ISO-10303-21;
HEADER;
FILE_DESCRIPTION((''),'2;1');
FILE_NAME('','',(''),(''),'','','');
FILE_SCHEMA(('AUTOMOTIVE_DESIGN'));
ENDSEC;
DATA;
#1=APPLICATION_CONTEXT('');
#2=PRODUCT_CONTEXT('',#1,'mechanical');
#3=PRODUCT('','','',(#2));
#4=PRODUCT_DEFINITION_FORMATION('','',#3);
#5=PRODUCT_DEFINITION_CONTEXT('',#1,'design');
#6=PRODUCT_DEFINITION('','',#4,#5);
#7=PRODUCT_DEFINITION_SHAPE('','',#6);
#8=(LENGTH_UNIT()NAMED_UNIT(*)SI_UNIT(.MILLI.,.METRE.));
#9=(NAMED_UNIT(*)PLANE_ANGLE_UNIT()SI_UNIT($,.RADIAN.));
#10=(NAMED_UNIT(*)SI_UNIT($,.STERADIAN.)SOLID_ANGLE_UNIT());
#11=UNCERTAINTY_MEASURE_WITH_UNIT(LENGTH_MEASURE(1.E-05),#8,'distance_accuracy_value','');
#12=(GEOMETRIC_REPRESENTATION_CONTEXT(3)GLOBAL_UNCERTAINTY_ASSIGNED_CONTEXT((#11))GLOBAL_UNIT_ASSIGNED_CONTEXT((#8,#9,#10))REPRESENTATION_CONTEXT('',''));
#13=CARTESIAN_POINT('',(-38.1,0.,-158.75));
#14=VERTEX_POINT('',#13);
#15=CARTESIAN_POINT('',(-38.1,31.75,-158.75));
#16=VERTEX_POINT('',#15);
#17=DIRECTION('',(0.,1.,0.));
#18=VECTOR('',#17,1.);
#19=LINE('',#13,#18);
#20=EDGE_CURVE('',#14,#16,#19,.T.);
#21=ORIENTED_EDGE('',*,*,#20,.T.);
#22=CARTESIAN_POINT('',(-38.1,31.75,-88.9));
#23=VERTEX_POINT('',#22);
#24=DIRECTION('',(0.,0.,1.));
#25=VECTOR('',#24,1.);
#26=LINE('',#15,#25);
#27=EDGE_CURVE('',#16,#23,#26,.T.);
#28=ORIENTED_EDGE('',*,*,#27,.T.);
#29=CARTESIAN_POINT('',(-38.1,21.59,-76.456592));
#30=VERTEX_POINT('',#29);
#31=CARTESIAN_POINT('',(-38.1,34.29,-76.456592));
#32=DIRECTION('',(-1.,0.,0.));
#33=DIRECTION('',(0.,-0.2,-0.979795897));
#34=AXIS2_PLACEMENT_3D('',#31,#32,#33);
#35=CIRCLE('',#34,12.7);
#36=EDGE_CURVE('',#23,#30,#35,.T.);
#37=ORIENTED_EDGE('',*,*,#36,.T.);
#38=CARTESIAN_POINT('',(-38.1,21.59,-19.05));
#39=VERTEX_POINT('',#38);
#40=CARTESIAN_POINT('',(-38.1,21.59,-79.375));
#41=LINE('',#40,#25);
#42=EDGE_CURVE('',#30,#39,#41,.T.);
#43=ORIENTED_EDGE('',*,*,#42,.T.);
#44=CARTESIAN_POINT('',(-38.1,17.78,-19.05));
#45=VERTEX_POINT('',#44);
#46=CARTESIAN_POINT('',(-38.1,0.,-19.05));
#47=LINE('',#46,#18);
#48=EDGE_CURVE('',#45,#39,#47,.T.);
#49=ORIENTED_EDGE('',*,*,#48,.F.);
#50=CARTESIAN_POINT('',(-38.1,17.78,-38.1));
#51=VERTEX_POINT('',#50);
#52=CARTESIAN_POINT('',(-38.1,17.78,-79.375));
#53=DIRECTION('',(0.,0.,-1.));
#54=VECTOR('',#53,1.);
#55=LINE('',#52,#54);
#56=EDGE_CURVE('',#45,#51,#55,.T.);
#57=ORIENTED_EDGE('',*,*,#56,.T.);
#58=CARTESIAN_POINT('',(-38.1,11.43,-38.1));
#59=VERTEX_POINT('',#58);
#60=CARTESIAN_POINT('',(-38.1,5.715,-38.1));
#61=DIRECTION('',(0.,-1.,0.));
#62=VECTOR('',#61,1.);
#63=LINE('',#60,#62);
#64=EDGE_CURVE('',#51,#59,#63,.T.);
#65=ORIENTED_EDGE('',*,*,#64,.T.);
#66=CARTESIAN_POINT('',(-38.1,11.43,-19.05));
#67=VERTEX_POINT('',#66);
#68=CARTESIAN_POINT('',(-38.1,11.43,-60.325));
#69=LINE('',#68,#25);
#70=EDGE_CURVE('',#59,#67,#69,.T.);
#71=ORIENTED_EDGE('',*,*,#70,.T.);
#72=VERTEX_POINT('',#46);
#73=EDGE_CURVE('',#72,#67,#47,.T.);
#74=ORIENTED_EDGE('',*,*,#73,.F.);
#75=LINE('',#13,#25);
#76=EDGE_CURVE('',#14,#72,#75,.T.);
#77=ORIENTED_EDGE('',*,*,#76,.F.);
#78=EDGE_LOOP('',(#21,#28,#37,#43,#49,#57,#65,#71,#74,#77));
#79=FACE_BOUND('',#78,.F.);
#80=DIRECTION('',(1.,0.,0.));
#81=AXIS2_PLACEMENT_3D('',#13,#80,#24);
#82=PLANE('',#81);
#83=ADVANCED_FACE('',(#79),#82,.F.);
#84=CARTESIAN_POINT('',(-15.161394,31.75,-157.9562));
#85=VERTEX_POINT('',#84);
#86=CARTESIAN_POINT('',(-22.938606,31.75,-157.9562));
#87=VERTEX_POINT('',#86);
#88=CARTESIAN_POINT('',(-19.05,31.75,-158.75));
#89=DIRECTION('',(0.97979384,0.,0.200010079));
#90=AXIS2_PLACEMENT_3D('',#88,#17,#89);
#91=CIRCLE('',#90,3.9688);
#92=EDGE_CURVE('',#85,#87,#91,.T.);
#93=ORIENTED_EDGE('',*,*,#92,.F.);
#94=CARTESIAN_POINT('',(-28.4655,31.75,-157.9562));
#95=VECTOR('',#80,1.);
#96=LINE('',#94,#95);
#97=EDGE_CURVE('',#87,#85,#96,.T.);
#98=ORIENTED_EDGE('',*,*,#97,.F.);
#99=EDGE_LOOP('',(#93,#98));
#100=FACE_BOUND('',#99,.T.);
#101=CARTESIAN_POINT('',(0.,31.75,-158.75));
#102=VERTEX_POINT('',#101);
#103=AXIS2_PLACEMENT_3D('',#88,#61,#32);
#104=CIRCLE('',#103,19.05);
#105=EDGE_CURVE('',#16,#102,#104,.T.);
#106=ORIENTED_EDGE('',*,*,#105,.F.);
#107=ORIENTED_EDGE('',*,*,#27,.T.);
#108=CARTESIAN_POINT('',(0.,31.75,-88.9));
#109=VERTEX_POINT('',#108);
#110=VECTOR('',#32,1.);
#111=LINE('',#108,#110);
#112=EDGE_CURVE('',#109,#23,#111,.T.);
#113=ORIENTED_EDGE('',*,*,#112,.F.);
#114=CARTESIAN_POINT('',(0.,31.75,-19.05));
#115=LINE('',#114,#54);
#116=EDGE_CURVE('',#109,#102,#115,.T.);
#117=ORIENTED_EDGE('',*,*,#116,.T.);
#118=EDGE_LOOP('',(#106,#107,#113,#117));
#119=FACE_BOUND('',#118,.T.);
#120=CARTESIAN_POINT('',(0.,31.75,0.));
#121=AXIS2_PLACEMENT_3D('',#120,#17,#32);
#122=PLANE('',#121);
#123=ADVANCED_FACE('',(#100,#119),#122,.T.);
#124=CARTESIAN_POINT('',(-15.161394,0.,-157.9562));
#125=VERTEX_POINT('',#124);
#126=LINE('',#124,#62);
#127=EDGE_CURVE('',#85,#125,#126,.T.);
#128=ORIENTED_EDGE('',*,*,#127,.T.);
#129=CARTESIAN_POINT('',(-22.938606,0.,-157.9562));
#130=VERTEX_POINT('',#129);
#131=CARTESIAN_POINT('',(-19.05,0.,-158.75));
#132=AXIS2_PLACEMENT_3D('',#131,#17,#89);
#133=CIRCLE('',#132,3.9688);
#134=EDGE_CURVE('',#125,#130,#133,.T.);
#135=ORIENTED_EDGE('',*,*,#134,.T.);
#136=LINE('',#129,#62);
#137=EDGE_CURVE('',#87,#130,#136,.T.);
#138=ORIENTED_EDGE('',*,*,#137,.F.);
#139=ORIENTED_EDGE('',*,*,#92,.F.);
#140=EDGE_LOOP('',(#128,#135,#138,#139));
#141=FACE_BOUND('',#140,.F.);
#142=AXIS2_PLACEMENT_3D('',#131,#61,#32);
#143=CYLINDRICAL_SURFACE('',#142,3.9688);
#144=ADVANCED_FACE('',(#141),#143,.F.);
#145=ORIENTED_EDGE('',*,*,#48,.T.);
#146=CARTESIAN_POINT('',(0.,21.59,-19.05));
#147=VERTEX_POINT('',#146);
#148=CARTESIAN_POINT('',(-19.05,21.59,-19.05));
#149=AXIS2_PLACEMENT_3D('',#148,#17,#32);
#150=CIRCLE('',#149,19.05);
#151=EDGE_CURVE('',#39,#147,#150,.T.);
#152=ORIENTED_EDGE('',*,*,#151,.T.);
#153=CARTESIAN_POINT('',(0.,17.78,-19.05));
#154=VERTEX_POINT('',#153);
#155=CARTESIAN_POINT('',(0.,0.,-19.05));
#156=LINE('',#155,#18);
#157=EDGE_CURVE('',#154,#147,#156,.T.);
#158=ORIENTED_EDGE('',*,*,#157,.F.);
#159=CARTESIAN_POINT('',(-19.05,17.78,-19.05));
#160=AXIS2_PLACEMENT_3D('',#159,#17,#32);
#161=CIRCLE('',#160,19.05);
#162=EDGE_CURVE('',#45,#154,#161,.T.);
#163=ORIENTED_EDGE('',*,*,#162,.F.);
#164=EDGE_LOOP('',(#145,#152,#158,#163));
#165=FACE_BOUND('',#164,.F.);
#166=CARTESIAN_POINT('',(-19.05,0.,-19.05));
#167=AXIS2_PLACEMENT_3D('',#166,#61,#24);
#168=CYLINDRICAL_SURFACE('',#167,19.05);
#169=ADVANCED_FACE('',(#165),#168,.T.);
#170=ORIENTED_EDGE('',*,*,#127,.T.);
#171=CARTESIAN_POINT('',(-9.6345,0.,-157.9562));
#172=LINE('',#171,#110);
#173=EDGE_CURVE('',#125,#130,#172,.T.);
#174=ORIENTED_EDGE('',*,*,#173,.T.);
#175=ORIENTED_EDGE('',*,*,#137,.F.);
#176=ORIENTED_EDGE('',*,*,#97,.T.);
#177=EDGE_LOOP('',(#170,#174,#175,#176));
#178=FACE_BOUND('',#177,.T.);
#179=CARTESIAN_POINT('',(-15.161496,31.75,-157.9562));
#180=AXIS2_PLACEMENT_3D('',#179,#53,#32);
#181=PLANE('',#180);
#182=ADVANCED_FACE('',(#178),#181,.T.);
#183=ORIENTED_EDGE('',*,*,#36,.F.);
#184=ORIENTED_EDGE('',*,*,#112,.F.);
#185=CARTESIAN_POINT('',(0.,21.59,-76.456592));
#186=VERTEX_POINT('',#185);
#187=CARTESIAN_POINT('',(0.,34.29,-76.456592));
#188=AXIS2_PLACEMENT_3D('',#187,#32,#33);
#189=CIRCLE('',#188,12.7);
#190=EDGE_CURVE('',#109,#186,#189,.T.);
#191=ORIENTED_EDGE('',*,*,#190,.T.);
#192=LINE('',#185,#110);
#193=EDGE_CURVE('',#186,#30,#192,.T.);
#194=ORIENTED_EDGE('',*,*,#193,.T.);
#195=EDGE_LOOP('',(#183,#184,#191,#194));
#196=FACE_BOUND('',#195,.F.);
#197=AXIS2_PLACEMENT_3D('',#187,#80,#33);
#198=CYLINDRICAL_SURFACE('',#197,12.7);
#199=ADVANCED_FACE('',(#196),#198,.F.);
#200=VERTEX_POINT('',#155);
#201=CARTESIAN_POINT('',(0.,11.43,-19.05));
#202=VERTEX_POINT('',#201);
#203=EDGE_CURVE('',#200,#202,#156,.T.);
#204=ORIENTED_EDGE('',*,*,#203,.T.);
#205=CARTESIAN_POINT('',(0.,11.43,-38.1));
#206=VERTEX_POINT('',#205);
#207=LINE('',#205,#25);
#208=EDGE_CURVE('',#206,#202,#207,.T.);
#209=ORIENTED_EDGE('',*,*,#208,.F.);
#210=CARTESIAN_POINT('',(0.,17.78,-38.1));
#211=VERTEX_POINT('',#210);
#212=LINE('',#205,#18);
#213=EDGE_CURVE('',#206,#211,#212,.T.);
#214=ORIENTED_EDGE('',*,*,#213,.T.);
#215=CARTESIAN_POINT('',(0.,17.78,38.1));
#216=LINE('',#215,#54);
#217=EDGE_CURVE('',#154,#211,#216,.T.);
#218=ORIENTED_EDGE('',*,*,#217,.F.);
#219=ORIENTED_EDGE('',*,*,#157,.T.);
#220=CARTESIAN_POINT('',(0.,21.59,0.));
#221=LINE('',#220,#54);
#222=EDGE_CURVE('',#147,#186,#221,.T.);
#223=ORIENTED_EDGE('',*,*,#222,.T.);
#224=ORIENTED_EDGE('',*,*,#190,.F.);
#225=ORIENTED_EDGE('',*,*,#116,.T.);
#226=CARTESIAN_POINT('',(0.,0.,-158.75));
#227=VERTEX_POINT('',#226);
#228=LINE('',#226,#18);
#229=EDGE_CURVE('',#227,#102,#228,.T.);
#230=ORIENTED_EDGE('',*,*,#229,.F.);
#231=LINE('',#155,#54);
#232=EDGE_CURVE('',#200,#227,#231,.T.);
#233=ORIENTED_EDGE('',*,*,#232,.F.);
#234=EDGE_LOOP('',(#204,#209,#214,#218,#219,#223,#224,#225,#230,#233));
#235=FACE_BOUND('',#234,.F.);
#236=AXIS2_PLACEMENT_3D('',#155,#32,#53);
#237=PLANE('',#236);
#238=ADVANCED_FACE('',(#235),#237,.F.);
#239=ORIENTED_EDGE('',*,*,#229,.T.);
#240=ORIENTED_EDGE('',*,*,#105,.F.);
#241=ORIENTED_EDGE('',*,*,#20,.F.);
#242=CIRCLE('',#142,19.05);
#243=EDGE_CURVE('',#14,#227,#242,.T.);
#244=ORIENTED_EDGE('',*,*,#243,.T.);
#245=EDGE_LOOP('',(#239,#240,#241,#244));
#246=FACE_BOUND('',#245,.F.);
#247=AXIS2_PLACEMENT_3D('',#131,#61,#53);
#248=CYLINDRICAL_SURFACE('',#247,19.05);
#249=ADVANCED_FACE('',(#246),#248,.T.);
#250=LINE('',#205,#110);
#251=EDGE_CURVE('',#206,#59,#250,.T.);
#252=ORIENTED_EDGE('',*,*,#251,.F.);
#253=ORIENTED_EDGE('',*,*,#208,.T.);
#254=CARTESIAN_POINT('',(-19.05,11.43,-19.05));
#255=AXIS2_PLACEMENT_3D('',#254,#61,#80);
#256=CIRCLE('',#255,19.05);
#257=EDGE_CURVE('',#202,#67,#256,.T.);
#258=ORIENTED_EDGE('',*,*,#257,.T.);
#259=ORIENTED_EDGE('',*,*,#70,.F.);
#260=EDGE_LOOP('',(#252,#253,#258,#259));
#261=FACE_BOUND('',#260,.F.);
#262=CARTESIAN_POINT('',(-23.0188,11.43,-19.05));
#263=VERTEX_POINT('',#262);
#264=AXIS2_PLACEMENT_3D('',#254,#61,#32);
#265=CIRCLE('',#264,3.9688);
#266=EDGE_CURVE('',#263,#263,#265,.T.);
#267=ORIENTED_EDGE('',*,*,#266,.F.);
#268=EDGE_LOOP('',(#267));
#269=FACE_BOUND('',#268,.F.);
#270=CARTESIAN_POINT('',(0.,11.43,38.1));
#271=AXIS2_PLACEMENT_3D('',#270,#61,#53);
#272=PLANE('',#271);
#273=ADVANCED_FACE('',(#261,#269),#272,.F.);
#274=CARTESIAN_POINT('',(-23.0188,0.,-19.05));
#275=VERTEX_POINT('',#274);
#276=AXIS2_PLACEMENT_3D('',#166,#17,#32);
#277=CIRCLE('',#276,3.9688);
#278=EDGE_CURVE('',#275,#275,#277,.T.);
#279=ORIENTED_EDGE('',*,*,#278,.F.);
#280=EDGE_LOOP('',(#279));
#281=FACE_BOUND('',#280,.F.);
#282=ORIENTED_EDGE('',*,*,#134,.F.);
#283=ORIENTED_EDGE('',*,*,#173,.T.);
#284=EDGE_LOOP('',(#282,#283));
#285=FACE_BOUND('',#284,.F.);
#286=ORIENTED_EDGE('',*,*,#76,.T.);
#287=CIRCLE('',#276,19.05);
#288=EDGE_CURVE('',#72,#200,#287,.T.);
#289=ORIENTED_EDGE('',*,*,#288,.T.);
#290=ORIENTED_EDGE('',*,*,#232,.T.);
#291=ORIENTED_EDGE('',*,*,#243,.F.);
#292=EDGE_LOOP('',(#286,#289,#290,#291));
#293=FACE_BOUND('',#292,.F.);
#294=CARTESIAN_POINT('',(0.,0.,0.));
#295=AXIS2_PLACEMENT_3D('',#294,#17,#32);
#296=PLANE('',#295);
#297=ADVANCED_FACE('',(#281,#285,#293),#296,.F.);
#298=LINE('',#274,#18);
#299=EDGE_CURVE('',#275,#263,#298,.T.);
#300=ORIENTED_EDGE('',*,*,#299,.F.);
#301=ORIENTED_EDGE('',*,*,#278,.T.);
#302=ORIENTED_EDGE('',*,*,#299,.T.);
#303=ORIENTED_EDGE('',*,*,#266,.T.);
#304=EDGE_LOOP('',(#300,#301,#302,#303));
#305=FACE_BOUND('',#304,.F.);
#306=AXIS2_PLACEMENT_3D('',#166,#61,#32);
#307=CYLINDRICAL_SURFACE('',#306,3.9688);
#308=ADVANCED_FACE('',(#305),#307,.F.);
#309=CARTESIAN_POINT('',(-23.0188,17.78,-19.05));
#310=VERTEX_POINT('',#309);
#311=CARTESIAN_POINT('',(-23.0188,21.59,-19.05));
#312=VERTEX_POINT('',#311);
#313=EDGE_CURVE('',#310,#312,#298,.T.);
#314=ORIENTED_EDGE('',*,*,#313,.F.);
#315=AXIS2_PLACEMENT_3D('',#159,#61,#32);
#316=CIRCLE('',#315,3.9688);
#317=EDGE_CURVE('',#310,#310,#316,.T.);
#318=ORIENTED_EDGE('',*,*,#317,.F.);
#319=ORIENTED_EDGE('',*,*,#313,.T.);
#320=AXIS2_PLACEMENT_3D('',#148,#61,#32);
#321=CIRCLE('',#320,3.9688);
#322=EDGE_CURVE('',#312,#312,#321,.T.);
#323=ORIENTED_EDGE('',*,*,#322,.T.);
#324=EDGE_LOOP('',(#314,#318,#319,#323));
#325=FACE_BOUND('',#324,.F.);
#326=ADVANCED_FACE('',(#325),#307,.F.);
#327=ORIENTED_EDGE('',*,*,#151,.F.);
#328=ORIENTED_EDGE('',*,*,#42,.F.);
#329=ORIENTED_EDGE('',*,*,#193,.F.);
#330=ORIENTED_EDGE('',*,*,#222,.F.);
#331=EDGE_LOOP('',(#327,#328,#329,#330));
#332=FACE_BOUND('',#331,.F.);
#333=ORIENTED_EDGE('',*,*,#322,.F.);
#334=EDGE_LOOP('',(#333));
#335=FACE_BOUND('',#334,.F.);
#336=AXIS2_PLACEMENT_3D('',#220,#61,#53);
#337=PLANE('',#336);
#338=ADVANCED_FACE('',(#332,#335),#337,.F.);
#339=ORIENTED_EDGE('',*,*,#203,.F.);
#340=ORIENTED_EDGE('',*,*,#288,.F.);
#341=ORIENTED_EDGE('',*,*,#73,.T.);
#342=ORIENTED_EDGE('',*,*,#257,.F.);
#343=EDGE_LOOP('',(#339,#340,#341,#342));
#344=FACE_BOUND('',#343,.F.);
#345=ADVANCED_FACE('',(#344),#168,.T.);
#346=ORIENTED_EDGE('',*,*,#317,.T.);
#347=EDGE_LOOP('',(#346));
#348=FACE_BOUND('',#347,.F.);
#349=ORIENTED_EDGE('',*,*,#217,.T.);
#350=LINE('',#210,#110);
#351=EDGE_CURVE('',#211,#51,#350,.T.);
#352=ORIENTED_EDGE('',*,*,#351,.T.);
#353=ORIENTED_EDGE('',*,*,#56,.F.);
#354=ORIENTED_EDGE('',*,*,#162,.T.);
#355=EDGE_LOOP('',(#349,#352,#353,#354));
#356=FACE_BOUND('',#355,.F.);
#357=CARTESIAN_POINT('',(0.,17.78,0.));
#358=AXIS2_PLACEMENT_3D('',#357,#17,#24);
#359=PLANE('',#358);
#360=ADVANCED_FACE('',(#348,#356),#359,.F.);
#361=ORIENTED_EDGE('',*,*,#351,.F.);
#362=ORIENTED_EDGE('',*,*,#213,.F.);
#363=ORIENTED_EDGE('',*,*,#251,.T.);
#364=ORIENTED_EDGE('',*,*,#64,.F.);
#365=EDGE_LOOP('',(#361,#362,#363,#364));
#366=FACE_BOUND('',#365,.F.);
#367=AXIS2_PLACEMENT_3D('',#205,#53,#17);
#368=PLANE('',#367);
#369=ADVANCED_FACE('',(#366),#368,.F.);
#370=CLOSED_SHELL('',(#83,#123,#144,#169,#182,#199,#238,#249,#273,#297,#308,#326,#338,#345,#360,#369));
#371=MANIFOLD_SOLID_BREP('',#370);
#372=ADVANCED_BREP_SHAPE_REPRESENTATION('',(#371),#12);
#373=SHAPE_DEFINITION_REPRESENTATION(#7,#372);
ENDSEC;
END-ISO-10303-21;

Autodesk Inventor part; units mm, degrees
ref_plane "YZ Plane" through (0, 0, 0) normal (1, 0, 0) x (0, 1, 0)
ref_plane "XZ Plane" through (0, 0, 0) normal (0, 1, 0) x (-1, 0, 0)
ref_plane "XY Plane" through (0, 0, 0) normal (0, 0, 1) x (1, 0, 0)
sketch "Sketch1" plane through (0, 0, 0) normal (0, 1, 0) x (-1, 0, 0)
  line L0 (0, -19.05) -> (0, -158.75)
  line L1 (19.05, -177.8) -> (19.05, -177.8)
  line L2 (38.1, -158.75) -> (38.1, -19.05)
  line L3 (19.05, 0) -> (19.05, 0)
  arc A0 (0, -158.75) -> (19.05, -177.8) centre (19.05, -158.75) ccw
  arc A1 (19.05, -177.8) -> (38.1, -158.75) centre (19.05, -158.75) ccw
  arc A2 (38.1, -19.05) -> (19.05, 0) centre (19.05, -19.05) ccw
  arc A3 (19.05, 0) -> (0, -19.05) centre (19.05, -19.05) ccw
  circle A4 centre (19.05, -19.05) radius 3.9688
  circle A5 centre (19.05, -158.75) radius 3.9688
  point P0 (0, 0)
  point P1 (0, -177.8)
  point P2 (38.1, -177.8)
  dimension "d0" = 38.1
  dimension "LengthOfArm_Thicker" = 177.8
  dimension "d2" = 19.05
  dimension "d3" = 7.9375
  dimension "Motor_Shaft_Diameter" = 7.9375
extrude "Extrusion1" add sketch "Sketch1" along normal blind 31.75
sketch "Sketch3" plane through (0, 0, -19.05) normal (1, 0, 0) x (0, 0, -1)
  line L0 (-57.15, 11.43) -> (19.05, 11.43)
  line L1 (19.05, 11.43) -> (19.05, 17.78)
  line L2 (19.05, 17.78) -> (-57.15, 17.78)
  line L3 (-57.15, 17.78) -> (-57.15, 11.43)
  line L4 (-19.05, 0) -> (-19.05, 31.75) projected
  line L5 (-57.15, 11.43) -> (19.05, 17.78) construction
  line L6 (19.05, 11.43) -> (-57.15, 17.78) construction
  line L7 (0, 0) -> (-19.05, 0) projected
  line L8 (-19.05, 0) -> (-19.05, 31.75) projected
  line L9 (-19.05, 21.59) -> (69.85, 21.59)
  line L10 (69.85, 21.59) -> (69.85, 31.75)
  line L11 (139.7, 31.75) -> (0, 31.75) projected
  line L12 (0, 31.75) -> (-19.05, 31.75) projected
  line L13 (69.85, 31.75) -> (-19.05, 31.75)
  line L14 (-19.05, 0) -> (-19.05, 31.75) projected
  line L15 (-19.05, 31.75) -> (-19.05, 21.59)
  point P0 (-19.05, 14.605)
  point P1 (-19.05, 14.605)
  dimension "d15" = 6.35
  dimension "d19" = 11.43
  dimension "d20" = 10.16
  dimension "d21" = 88.9
extrude "Extrusion3" cut sketch "Sketch3" against normal up to next
fillet "Fillet3" radius 12.7 1 edges at (-19.05, 21.59, -88.9)
sketch "Sketch4" plane through (0, 31.75, 0) normal (0, 1, 0) x (1, 0, 0)
  circle A0 centre (-19.05, 158.75) radius 3.9687 projected
  line L0 (-9.6345, 157.9562) -> (-28.4655, 157.9562)
  line L1 (-28.4655, 157.9562) -> (-28.4655, 151.6062)
  line L2 (-28.4655, 151.6062) -> (-9.6345, 151.6062)
  line L3 (-9.6345, 151.6062) -> (-9.6345, 157.9562)
  line L4 (-9.6345, 157.9562) -> (-28.4655, 151.6062) construction
  line L5 (-28.4655, 157.9562) -> (-9.6345, 151.6062) construction
  point P0 (0, 0)
  point P1 (-19.05, 154.7812)
  dimension "d23" = 6.35
extrude "Extrusion4" add sketch "Sketch4" against normal up to surface (31.75 mm away) contours L0 A0 | A0 L0 L3 L2 L1 picked at (-18.2787, 156.5235)
equation "\"Thickness_Thicker\" = 2 * Thickness_Thiner"
equation "\"Thickness_Thiner\" = 15.875"
properties part number "ArmThicker"
